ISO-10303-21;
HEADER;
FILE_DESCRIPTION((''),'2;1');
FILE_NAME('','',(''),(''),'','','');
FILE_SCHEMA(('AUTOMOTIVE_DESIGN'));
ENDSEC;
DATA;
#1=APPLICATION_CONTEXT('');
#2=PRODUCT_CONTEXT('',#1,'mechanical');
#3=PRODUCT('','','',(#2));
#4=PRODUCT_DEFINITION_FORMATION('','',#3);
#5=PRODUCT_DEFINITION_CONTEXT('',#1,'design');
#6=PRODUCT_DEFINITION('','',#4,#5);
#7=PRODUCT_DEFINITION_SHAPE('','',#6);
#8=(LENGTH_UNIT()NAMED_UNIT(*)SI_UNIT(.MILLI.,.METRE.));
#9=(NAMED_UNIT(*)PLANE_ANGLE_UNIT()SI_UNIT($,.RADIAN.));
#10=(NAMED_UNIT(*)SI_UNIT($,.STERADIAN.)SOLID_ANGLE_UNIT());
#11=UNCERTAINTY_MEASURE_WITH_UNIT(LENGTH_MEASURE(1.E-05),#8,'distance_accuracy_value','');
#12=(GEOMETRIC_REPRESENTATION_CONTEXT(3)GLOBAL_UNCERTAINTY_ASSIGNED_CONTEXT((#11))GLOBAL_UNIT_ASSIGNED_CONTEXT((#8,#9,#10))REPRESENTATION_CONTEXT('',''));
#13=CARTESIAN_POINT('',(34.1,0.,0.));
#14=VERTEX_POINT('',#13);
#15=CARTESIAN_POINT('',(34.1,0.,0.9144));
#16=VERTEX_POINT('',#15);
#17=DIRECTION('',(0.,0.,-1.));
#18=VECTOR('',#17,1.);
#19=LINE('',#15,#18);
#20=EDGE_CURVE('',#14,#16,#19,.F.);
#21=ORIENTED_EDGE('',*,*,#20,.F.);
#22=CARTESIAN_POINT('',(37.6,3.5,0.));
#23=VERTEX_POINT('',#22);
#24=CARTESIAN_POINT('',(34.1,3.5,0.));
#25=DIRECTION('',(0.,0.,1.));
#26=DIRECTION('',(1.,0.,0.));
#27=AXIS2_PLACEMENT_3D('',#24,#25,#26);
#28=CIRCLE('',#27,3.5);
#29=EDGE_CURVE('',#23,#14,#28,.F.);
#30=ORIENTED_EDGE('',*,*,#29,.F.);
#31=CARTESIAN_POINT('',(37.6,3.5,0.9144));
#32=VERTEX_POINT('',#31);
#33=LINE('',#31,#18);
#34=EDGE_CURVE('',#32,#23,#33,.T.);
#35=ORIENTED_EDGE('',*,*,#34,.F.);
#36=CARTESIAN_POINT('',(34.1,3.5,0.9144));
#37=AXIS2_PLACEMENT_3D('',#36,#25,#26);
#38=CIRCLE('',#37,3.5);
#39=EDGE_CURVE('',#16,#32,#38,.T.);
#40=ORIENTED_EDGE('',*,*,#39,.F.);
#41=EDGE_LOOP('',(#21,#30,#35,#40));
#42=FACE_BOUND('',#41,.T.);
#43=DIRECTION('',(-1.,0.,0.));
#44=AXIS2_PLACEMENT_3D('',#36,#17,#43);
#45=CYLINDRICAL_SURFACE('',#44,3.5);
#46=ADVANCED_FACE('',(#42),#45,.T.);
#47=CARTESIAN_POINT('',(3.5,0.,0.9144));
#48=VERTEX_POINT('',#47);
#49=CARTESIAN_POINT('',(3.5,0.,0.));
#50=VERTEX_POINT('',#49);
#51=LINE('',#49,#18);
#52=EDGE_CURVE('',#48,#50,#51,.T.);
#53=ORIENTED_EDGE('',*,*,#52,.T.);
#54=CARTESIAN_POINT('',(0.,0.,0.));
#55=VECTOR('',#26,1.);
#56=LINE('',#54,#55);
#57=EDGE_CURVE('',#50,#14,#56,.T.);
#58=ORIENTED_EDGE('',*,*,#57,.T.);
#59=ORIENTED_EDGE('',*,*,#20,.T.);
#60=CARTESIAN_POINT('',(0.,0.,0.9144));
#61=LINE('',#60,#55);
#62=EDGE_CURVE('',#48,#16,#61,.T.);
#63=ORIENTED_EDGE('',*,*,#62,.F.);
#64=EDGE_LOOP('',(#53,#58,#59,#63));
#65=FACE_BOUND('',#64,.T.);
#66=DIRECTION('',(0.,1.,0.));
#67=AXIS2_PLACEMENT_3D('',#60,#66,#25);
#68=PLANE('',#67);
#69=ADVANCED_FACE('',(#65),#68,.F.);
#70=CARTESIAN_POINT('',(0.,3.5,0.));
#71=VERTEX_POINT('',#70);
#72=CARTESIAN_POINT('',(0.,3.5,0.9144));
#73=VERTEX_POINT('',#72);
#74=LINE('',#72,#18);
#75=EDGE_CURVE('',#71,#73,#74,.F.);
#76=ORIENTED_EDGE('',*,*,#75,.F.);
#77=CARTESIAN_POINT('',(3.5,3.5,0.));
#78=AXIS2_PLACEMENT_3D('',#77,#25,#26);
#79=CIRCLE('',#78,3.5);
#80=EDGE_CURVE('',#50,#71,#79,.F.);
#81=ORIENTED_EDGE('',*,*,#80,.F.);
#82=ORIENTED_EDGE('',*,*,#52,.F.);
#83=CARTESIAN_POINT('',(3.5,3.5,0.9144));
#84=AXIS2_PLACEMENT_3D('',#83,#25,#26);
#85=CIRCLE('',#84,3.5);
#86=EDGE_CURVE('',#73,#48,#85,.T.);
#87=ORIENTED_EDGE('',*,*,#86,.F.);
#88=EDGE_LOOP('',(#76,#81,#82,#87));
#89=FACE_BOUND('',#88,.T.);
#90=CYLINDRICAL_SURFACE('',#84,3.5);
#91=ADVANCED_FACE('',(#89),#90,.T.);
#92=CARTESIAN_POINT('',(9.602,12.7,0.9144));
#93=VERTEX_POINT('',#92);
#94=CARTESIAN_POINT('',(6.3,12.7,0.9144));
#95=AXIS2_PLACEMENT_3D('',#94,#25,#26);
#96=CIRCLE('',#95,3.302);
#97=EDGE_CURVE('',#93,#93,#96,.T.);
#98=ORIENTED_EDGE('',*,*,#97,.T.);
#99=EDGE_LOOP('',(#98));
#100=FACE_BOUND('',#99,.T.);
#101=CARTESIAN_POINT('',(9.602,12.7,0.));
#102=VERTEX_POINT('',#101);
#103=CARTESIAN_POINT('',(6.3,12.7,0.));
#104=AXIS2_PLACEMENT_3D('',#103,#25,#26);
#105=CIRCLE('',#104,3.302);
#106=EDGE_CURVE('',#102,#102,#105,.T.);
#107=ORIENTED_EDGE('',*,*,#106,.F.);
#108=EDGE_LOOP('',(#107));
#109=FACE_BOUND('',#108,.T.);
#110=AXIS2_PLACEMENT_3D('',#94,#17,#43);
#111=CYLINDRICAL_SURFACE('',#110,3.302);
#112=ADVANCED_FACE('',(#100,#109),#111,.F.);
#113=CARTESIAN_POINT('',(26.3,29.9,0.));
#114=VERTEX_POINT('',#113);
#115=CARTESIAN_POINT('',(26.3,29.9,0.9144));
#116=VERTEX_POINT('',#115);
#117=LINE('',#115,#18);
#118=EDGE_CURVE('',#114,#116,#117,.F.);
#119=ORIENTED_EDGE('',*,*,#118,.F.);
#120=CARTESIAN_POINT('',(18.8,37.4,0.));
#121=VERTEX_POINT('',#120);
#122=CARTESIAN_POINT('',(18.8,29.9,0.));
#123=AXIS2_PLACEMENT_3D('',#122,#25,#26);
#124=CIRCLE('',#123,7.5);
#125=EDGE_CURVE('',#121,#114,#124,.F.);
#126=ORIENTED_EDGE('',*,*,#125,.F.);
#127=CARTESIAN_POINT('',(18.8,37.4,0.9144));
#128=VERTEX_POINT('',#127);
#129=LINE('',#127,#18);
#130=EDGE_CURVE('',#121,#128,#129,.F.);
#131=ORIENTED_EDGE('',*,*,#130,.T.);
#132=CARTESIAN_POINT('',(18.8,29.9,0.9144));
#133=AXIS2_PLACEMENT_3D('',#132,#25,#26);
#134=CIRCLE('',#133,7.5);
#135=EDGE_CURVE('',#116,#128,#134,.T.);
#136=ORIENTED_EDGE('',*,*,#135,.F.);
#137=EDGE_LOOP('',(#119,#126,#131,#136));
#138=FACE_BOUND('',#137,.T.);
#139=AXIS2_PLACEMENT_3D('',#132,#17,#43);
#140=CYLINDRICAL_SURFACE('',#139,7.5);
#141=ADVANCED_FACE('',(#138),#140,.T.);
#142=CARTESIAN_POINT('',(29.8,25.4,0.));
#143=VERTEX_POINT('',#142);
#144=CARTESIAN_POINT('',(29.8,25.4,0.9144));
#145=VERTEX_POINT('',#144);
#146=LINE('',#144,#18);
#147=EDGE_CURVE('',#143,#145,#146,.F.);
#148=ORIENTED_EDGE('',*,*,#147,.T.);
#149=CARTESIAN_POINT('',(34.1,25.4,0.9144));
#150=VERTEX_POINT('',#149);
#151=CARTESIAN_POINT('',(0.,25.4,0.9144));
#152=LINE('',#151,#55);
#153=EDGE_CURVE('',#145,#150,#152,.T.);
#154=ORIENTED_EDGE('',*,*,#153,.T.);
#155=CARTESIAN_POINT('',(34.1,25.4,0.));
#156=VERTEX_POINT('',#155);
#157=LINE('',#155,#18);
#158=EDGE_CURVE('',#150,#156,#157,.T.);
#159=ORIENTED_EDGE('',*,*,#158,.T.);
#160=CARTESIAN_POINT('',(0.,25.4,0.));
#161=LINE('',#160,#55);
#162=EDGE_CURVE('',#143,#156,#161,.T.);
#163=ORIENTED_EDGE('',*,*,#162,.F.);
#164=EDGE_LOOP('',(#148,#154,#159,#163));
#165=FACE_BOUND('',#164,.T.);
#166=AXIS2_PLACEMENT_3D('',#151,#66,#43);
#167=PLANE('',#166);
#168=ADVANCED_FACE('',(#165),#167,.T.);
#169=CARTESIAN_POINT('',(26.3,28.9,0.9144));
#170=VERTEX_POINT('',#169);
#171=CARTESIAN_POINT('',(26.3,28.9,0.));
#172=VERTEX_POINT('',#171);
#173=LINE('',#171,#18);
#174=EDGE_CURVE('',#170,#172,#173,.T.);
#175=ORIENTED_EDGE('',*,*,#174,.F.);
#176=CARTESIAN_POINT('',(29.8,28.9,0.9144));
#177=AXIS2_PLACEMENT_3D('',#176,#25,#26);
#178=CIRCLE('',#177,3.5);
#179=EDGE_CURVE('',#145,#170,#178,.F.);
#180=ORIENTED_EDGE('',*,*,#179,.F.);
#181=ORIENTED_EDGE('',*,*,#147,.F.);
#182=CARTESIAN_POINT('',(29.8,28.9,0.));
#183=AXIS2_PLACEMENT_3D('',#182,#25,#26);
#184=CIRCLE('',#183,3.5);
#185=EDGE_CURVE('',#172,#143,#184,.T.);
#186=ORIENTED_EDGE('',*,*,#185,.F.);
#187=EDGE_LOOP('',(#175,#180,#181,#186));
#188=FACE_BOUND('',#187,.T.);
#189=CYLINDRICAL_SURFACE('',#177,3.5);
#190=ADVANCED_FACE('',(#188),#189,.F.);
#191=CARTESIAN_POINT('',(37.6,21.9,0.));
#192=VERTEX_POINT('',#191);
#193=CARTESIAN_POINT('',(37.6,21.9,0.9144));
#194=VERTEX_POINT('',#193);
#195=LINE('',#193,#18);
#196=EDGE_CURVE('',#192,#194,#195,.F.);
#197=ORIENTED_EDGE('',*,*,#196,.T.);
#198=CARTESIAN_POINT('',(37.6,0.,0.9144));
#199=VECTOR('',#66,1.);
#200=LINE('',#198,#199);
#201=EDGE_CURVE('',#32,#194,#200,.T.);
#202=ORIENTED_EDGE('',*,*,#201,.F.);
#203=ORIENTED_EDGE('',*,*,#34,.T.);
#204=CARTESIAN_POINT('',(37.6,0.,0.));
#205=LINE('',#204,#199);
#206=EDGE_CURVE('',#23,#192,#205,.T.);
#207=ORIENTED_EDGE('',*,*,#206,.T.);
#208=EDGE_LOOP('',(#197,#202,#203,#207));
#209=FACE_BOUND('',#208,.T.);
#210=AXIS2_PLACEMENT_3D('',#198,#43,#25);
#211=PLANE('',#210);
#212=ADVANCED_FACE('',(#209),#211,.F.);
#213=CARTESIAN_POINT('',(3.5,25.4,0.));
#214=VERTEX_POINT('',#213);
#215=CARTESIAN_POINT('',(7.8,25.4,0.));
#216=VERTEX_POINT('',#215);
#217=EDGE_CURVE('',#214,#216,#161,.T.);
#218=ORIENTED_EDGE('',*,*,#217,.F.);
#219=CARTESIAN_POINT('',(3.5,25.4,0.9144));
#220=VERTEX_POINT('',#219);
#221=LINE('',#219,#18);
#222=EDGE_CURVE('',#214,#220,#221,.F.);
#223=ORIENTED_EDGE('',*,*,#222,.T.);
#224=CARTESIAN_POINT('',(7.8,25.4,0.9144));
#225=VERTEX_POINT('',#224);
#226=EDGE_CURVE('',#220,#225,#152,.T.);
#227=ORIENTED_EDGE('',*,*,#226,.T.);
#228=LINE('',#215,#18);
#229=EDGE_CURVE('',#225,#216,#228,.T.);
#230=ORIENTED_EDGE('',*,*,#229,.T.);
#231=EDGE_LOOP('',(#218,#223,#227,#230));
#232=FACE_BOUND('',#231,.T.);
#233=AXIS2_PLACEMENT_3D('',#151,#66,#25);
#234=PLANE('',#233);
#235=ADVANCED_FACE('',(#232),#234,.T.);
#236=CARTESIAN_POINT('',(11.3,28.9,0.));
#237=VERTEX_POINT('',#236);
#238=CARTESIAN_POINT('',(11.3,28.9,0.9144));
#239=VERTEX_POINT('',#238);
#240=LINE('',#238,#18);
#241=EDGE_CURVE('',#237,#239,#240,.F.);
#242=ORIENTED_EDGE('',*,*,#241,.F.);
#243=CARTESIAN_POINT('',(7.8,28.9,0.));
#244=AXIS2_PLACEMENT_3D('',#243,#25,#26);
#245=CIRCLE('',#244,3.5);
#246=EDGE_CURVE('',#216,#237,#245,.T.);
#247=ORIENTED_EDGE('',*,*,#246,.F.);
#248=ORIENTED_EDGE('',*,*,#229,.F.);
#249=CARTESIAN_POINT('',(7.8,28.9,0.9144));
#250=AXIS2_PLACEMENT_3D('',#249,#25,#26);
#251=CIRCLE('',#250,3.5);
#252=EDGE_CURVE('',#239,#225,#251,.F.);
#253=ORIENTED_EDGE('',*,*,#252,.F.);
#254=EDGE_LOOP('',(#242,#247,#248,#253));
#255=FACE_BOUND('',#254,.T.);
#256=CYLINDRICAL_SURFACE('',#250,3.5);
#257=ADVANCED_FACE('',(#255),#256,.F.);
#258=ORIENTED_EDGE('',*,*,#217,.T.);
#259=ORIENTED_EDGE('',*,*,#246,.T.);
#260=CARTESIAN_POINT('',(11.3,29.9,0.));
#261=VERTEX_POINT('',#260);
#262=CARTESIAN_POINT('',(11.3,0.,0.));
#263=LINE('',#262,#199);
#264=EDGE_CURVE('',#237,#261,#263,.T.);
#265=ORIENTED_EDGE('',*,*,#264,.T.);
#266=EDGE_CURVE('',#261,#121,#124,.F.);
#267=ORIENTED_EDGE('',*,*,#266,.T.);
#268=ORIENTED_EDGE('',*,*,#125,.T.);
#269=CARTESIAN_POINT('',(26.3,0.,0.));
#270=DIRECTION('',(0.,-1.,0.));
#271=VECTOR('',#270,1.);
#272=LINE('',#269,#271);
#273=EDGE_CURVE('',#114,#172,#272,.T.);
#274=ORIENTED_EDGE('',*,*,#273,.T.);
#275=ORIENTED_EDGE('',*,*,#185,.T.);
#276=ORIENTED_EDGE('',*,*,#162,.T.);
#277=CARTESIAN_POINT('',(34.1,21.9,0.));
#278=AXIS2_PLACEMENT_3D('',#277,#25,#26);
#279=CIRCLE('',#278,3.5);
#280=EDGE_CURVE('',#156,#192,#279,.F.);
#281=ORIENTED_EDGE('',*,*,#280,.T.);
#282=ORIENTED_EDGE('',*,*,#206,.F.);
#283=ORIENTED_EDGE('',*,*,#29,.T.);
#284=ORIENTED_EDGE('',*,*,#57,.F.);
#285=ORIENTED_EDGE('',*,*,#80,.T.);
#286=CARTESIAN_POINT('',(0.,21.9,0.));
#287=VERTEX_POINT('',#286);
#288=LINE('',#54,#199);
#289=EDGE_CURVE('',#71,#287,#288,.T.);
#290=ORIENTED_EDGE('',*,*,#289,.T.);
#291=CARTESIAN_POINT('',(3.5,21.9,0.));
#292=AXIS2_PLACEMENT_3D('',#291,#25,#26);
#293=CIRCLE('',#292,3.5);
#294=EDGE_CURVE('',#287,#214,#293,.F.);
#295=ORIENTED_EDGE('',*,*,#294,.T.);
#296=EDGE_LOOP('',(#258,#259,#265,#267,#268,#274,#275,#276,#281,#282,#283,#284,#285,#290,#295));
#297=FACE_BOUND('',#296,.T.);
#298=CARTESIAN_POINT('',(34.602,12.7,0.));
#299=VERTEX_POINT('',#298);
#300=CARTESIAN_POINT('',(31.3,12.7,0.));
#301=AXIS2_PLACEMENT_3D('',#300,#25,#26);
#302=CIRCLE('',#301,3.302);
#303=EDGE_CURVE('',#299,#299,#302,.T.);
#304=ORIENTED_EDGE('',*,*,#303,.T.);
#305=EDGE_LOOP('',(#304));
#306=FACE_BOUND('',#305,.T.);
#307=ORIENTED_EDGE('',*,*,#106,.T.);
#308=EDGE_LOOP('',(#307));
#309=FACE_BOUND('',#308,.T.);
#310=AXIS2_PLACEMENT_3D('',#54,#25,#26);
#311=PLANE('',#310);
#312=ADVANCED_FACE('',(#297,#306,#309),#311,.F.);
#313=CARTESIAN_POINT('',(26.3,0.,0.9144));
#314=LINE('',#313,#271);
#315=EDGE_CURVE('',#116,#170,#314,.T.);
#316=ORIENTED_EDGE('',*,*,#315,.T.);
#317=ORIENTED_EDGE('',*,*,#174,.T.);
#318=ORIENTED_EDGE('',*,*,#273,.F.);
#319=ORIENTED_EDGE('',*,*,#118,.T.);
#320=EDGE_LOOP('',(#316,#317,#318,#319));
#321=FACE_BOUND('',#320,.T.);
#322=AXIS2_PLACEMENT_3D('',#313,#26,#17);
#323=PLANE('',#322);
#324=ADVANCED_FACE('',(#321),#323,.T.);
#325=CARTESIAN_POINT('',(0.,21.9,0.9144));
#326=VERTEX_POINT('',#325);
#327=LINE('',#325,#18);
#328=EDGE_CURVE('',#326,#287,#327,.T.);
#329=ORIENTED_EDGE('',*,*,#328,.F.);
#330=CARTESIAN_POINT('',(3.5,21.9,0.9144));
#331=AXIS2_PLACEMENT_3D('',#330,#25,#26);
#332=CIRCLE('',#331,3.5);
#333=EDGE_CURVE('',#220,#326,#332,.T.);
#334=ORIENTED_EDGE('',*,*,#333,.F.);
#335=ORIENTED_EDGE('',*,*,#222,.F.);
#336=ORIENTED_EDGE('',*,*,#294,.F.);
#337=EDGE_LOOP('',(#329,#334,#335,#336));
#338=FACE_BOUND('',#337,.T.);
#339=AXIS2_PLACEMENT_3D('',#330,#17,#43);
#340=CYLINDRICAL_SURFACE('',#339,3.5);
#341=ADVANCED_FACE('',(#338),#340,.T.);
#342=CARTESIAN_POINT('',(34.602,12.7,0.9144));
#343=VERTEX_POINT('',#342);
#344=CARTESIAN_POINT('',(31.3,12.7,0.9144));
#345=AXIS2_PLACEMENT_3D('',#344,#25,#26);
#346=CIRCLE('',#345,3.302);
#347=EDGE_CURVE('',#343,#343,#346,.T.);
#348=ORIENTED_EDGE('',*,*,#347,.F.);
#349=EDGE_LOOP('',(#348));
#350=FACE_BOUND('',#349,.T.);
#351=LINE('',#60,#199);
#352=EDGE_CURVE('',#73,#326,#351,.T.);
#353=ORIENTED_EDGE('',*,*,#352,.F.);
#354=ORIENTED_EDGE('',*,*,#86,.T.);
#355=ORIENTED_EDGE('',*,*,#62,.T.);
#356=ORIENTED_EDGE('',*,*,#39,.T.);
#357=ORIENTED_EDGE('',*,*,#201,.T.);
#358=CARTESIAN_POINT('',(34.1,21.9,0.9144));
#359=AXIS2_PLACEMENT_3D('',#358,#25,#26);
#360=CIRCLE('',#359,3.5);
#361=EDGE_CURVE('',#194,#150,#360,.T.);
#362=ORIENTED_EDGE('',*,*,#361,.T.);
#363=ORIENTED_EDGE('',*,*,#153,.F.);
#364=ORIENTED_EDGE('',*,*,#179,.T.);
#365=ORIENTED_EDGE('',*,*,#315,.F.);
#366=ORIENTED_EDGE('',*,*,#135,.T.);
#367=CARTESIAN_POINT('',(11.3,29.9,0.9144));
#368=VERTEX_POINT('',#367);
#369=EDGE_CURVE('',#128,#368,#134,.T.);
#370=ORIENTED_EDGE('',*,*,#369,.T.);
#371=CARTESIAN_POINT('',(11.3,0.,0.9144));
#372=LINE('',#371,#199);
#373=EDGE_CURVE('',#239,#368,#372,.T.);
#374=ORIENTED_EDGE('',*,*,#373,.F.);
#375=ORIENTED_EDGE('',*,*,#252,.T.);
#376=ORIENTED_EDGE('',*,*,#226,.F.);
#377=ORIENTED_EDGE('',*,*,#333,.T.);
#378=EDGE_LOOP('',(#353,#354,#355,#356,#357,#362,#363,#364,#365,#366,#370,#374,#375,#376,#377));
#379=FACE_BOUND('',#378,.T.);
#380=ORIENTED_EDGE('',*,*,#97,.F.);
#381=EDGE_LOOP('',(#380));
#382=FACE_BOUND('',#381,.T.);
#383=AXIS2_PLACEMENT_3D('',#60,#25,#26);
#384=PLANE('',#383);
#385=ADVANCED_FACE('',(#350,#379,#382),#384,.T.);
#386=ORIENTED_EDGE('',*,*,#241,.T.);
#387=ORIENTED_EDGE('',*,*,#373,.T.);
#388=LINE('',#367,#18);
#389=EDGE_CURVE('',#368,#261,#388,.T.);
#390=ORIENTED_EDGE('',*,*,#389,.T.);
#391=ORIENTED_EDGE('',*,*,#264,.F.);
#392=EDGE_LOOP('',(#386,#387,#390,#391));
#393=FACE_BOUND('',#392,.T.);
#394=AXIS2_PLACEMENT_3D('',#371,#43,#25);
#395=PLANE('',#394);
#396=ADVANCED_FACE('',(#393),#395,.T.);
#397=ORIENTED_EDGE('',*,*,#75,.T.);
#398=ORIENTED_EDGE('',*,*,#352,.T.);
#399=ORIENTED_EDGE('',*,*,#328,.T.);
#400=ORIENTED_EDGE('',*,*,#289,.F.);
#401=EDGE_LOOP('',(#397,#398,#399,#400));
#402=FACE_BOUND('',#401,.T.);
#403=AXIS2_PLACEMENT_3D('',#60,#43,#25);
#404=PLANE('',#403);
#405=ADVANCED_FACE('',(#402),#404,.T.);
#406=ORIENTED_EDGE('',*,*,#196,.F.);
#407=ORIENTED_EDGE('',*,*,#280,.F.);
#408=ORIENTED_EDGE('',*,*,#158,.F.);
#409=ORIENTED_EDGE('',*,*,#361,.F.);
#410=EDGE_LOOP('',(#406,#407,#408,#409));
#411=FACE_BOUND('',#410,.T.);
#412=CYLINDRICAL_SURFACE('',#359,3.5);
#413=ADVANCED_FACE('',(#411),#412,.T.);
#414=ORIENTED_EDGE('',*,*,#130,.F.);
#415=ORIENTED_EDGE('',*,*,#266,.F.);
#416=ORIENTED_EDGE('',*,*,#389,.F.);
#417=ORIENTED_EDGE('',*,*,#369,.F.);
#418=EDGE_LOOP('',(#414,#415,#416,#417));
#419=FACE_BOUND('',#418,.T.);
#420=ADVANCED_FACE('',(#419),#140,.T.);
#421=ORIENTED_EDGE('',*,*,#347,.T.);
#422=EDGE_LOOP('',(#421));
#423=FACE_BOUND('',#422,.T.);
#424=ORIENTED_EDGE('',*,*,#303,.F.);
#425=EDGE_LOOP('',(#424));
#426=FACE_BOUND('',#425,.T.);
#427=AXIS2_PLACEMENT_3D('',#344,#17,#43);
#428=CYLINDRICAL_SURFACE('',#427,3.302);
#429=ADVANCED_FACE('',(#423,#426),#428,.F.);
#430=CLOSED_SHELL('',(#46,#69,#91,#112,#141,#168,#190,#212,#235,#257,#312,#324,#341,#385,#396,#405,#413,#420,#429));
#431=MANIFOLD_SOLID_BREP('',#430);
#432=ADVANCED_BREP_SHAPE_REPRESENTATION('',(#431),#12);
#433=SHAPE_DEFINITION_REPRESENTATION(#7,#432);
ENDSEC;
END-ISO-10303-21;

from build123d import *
from OCP.BRepFilletAPI import BRepFilletAPI_MakeFillet

# Parameters (mm, degrees)
SKETCH1_R           = 3.302
SKETCH1_R_2         = 4.5
BOSS_EXTRUDE1_DEPTH = 0.9144
FILLET2_R           = 7.5
FILLET2_R_2         = 3.5


with BuildPart() as part:
    # Sketch1 → Boss-Extrude1 (new body)
    # profile 1 of 2: a face of its own
    with BuildSketch(Plane.XY):
        Polygon((26.3, 25.4), (37.6, 25.4), (37.6, 0), (0, 0), (0, 25.4), (11.3, 25.4), (11.3, 37.4), (26.3, 37.4), align=None)
        with Locations((31.3, 12.7)):
            Circle(SKETCH1_R, mode=Mode.SUBTRACT)
        with Locations((6.3, 12.7)):
            Circle(SKETCH1_R, mode=Mode.SUBTRACT)
        with Locations((18.8, 29.9)):
            Circle(SKETCH1_R_2, mode=Mode.SUBTRACT)
    # profile 2 of 2: a face of its own
    with BuildSketch(Plane.XY):
        with Locations((18.8, 29.9)):
            Circle(SKETCH1_R_2)
    extrude(amount=BOSS_EXTRUDE1_DEPTH)

    # Fillet2
    fillet2_edges_1 = [part.edges().sort_by_distance(p)[0] for p in [
        (11.3, 37.4, 0.4572),
        (26.3, 37.4, 0.4572),
    ]]
    fillet2_edges_2 = [part.edges().sort_by_distance(p)[0] for p in [
        (11.3, 25.4, 0.4572),
        (0, 25.4, 0.4572),
        (0, 0, 0.4572),
        (37.6, 25.4, 0.4572),
        (26.3, 25.4, 0.4572),
        (37.6, 0, 0.4572),
    ]]
    fillet2 = BRepFilletAPI_MakeFillet(part.part.solid().wrapped)
    for e in fillet2_edges_1:
        fillet2.Add(FILLET2_R - 0.0001, e.wrapped)
    for e in fillet2_edges_2:
        fillet2.Add(FILLET2_R_2 - 0.0001, e.wrapped)
    add(Compound.cast(fillet2.Shape()), mode=Mode.REPLACE)  # a hair under: the kernel refuses the full size


solid = part.part
